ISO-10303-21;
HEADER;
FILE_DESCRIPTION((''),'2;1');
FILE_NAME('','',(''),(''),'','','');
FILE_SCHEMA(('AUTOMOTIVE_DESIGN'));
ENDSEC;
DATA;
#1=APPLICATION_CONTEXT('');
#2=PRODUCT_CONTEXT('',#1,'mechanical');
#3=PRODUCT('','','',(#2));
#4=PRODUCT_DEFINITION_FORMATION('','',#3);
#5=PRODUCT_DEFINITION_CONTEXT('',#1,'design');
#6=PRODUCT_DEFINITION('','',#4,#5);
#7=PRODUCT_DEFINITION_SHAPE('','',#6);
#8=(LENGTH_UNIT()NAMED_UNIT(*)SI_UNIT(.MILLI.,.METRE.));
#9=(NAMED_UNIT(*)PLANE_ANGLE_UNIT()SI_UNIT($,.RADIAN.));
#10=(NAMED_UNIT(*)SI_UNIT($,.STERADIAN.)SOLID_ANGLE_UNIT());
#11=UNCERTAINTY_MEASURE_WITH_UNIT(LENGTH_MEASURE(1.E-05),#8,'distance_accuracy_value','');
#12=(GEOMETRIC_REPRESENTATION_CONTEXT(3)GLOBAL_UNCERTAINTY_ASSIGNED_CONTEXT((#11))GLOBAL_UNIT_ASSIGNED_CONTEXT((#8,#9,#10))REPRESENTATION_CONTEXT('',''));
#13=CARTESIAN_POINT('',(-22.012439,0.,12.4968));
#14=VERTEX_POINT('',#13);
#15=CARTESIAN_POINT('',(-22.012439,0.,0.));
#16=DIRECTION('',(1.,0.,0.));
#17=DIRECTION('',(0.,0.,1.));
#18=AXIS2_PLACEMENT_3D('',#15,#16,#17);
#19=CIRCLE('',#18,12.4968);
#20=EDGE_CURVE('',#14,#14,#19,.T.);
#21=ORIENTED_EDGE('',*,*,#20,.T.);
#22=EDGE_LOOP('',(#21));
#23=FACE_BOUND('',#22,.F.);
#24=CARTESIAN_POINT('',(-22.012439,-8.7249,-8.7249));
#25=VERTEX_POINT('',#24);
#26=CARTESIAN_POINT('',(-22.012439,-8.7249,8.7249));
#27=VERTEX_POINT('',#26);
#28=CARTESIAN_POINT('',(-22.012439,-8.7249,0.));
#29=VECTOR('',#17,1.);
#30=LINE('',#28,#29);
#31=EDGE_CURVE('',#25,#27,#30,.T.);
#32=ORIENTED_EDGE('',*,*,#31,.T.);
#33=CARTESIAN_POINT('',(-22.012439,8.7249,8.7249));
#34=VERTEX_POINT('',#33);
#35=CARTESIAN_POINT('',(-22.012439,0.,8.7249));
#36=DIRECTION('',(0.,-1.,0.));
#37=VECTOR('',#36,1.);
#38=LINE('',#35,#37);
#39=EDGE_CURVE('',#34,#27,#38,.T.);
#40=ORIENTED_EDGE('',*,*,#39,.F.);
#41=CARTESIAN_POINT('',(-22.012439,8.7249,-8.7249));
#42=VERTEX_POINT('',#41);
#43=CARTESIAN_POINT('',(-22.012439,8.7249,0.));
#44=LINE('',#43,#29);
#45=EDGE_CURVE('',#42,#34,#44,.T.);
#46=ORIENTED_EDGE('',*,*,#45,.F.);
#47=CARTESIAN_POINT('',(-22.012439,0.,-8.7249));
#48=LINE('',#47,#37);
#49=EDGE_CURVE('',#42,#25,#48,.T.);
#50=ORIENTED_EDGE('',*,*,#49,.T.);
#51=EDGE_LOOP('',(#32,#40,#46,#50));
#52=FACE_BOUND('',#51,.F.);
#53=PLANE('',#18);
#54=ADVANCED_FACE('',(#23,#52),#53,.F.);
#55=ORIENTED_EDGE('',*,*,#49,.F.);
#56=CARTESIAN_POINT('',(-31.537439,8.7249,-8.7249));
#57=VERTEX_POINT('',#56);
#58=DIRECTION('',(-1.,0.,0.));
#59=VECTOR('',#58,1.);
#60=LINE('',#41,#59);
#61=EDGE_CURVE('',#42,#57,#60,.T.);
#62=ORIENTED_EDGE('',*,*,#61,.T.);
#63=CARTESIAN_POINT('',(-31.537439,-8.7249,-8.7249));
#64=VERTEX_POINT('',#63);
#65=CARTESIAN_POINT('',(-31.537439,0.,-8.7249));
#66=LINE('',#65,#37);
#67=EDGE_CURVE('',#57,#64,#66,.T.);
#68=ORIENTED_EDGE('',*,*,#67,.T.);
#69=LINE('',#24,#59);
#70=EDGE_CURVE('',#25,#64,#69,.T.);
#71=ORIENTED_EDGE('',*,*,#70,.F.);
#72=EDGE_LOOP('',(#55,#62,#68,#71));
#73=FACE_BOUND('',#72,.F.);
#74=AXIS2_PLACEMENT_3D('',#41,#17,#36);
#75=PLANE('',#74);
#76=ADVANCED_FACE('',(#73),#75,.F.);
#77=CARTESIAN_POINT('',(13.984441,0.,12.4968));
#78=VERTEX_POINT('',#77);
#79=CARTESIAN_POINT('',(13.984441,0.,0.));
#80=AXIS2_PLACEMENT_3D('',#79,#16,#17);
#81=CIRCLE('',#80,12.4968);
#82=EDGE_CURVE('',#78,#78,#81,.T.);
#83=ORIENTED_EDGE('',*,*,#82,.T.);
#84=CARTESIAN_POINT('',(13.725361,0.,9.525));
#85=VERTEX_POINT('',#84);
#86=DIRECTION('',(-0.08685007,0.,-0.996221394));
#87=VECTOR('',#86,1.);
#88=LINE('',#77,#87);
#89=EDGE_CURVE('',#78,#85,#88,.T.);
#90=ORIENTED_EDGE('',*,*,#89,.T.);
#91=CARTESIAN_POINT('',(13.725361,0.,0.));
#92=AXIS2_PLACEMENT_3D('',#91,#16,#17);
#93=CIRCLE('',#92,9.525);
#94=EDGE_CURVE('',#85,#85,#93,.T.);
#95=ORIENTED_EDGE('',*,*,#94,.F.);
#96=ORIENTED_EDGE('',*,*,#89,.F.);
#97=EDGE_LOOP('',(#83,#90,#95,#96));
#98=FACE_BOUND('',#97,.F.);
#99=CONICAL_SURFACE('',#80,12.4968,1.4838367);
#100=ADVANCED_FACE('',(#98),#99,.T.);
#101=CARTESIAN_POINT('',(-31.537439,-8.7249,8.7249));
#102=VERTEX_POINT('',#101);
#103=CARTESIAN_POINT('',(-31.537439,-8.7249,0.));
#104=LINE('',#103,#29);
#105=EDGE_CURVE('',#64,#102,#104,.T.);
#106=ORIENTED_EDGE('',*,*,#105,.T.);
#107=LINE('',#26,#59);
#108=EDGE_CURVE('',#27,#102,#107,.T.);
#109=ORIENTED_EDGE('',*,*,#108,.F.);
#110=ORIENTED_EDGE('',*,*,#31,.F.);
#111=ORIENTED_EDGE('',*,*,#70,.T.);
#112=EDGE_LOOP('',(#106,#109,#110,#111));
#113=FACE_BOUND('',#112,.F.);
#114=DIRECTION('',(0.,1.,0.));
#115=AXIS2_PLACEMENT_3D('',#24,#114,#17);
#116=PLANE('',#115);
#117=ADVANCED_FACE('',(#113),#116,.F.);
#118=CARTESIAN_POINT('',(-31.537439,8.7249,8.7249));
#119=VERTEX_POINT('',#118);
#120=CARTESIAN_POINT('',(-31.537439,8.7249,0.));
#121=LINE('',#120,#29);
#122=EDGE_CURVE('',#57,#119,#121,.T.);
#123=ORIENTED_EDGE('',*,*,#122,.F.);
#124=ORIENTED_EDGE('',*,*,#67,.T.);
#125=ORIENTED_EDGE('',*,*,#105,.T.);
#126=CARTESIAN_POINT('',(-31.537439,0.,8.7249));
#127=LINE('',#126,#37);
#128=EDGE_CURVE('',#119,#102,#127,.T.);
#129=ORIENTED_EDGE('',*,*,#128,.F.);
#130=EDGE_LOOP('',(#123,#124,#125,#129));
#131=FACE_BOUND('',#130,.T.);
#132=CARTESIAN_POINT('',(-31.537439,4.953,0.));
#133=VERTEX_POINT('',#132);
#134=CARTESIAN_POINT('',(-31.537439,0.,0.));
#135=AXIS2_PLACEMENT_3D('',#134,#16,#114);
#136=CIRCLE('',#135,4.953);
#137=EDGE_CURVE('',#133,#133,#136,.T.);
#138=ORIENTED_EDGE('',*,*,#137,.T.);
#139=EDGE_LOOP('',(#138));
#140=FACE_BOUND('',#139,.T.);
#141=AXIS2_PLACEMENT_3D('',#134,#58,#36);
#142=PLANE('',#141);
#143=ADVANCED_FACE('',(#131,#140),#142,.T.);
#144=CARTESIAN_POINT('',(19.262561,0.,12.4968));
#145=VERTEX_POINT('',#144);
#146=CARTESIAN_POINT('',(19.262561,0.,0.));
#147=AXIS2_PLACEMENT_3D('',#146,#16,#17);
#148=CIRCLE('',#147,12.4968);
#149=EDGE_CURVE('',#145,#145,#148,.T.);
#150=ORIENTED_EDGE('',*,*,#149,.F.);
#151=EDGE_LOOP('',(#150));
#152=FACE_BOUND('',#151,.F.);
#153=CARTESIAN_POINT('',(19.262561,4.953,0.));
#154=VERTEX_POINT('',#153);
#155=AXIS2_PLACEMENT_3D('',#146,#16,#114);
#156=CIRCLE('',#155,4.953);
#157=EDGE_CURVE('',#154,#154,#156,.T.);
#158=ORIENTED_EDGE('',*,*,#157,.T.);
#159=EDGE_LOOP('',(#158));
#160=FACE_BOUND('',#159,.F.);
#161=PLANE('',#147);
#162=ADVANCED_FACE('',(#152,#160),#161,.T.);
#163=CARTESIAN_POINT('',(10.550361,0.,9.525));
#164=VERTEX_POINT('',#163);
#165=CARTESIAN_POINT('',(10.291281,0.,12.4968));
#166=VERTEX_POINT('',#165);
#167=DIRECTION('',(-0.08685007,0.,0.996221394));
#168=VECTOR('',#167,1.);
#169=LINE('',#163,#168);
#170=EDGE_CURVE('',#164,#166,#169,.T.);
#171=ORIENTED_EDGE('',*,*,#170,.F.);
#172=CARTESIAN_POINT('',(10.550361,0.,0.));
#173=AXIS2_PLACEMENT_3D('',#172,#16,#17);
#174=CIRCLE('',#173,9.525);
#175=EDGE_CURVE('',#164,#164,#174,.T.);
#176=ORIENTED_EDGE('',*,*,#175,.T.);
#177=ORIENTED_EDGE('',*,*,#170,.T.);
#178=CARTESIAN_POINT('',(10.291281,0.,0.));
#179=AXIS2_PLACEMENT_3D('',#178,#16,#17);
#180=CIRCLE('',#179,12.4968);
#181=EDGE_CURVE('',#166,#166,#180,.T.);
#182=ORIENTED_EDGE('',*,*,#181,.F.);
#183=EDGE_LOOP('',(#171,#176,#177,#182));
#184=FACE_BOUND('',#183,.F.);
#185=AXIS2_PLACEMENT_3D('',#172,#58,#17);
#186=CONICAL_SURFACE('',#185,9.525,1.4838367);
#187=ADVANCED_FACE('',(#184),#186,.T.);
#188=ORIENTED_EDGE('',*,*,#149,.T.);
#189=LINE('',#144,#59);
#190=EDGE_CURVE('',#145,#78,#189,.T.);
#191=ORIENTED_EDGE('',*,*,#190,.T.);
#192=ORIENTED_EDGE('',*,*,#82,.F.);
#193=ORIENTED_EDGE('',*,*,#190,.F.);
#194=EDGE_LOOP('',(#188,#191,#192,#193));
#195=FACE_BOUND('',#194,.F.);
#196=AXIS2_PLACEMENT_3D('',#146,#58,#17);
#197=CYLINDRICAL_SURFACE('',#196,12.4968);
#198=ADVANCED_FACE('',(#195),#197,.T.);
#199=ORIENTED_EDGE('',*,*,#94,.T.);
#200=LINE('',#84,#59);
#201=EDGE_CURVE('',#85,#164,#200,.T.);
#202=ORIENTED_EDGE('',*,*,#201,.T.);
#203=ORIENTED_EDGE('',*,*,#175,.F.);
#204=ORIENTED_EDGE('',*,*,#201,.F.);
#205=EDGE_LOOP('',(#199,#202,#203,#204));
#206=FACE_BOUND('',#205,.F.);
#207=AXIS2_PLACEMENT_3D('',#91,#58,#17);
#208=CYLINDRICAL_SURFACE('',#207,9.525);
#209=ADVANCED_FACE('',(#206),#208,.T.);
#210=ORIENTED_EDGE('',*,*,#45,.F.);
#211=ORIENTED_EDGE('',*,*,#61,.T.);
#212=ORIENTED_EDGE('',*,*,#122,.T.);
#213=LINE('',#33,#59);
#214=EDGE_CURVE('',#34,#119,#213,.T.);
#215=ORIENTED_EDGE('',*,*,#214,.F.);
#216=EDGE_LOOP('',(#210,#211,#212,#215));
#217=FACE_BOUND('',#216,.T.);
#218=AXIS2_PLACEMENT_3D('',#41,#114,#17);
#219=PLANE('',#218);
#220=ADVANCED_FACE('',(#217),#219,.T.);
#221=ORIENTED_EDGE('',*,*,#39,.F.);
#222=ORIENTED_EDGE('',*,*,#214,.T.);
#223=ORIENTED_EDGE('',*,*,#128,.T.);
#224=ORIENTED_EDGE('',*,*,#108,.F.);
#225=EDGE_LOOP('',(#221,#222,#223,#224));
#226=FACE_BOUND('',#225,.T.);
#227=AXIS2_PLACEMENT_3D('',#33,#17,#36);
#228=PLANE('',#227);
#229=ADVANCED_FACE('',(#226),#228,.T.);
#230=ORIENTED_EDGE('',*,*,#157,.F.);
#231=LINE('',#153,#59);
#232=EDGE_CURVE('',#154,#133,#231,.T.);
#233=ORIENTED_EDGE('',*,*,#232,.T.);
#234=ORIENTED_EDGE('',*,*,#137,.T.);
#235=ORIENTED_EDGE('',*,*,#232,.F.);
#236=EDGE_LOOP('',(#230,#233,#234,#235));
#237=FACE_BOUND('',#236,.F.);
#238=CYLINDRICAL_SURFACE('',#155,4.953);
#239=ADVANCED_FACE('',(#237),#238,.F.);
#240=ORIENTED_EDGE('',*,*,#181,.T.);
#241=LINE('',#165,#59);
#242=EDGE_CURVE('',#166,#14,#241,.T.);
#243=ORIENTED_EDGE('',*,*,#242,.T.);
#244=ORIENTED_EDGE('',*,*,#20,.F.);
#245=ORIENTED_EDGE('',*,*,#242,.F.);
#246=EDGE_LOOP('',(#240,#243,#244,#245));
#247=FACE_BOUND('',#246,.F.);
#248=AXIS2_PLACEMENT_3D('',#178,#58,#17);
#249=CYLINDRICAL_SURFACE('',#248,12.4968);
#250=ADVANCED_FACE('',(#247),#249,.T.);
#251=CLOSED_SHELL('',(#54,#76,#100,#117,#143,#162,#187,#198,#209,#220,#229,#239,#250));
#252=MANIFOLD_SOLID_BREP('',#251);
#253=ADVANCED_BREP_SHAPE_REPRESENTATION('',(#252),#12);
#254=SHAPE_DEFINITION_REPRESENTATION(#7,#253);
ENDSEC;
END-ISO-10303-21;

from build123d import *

# Parameters (mm, degrees)
F2_W     = 17.4498
F2_H     = 17.4498
F3_DEPTH = 9.525
F4_R     = 4.953
F5_DEPTH = 50.8


# Not quite as in the source:
# - a feature names something its author has since deleted; it is built from what else it names


with BuildPart() as f1:
    # F0 (on Front) → F1 (revolve)
    with BuildSketch(Plane.XZ):
        Polygon((-22.0124394905, 12.4968), (-22.0124394905, 7.5298989686), (-22.0124394905, 0), (19.2625605095, 0), (19.2625605095, 3.7935770415), (19.2625605095, 12.4968), (13.9844405095, 12.4968), (13.7253605095, 9.525), (10.5503605095, 9.525), (10.2912805095, 12.4968), align=None)
    revolve(axis=Axis((-1.3749394905, 0, 0), (1, 0, 0)))

    # F2 (on face) → F3 (join)
    with BuildSketch(Plane(origin=(-22.0124394905, 0, 0), x_dir=(0, -1, 0), z_dir=(-1, 0, 0))):
        Rectangle(F2_W, F2_H)
    extrude(amount=F3_DEPTH)

    # F4 (on face) → F5 (cut)
    with BuildSketch(Plane.YZ.offset(19.2625605095)):
        Circle(F4_R)
    extrude(amount=-F5_DEPTH, mode=Mode.SUBTRACT)


solid = f1.part
